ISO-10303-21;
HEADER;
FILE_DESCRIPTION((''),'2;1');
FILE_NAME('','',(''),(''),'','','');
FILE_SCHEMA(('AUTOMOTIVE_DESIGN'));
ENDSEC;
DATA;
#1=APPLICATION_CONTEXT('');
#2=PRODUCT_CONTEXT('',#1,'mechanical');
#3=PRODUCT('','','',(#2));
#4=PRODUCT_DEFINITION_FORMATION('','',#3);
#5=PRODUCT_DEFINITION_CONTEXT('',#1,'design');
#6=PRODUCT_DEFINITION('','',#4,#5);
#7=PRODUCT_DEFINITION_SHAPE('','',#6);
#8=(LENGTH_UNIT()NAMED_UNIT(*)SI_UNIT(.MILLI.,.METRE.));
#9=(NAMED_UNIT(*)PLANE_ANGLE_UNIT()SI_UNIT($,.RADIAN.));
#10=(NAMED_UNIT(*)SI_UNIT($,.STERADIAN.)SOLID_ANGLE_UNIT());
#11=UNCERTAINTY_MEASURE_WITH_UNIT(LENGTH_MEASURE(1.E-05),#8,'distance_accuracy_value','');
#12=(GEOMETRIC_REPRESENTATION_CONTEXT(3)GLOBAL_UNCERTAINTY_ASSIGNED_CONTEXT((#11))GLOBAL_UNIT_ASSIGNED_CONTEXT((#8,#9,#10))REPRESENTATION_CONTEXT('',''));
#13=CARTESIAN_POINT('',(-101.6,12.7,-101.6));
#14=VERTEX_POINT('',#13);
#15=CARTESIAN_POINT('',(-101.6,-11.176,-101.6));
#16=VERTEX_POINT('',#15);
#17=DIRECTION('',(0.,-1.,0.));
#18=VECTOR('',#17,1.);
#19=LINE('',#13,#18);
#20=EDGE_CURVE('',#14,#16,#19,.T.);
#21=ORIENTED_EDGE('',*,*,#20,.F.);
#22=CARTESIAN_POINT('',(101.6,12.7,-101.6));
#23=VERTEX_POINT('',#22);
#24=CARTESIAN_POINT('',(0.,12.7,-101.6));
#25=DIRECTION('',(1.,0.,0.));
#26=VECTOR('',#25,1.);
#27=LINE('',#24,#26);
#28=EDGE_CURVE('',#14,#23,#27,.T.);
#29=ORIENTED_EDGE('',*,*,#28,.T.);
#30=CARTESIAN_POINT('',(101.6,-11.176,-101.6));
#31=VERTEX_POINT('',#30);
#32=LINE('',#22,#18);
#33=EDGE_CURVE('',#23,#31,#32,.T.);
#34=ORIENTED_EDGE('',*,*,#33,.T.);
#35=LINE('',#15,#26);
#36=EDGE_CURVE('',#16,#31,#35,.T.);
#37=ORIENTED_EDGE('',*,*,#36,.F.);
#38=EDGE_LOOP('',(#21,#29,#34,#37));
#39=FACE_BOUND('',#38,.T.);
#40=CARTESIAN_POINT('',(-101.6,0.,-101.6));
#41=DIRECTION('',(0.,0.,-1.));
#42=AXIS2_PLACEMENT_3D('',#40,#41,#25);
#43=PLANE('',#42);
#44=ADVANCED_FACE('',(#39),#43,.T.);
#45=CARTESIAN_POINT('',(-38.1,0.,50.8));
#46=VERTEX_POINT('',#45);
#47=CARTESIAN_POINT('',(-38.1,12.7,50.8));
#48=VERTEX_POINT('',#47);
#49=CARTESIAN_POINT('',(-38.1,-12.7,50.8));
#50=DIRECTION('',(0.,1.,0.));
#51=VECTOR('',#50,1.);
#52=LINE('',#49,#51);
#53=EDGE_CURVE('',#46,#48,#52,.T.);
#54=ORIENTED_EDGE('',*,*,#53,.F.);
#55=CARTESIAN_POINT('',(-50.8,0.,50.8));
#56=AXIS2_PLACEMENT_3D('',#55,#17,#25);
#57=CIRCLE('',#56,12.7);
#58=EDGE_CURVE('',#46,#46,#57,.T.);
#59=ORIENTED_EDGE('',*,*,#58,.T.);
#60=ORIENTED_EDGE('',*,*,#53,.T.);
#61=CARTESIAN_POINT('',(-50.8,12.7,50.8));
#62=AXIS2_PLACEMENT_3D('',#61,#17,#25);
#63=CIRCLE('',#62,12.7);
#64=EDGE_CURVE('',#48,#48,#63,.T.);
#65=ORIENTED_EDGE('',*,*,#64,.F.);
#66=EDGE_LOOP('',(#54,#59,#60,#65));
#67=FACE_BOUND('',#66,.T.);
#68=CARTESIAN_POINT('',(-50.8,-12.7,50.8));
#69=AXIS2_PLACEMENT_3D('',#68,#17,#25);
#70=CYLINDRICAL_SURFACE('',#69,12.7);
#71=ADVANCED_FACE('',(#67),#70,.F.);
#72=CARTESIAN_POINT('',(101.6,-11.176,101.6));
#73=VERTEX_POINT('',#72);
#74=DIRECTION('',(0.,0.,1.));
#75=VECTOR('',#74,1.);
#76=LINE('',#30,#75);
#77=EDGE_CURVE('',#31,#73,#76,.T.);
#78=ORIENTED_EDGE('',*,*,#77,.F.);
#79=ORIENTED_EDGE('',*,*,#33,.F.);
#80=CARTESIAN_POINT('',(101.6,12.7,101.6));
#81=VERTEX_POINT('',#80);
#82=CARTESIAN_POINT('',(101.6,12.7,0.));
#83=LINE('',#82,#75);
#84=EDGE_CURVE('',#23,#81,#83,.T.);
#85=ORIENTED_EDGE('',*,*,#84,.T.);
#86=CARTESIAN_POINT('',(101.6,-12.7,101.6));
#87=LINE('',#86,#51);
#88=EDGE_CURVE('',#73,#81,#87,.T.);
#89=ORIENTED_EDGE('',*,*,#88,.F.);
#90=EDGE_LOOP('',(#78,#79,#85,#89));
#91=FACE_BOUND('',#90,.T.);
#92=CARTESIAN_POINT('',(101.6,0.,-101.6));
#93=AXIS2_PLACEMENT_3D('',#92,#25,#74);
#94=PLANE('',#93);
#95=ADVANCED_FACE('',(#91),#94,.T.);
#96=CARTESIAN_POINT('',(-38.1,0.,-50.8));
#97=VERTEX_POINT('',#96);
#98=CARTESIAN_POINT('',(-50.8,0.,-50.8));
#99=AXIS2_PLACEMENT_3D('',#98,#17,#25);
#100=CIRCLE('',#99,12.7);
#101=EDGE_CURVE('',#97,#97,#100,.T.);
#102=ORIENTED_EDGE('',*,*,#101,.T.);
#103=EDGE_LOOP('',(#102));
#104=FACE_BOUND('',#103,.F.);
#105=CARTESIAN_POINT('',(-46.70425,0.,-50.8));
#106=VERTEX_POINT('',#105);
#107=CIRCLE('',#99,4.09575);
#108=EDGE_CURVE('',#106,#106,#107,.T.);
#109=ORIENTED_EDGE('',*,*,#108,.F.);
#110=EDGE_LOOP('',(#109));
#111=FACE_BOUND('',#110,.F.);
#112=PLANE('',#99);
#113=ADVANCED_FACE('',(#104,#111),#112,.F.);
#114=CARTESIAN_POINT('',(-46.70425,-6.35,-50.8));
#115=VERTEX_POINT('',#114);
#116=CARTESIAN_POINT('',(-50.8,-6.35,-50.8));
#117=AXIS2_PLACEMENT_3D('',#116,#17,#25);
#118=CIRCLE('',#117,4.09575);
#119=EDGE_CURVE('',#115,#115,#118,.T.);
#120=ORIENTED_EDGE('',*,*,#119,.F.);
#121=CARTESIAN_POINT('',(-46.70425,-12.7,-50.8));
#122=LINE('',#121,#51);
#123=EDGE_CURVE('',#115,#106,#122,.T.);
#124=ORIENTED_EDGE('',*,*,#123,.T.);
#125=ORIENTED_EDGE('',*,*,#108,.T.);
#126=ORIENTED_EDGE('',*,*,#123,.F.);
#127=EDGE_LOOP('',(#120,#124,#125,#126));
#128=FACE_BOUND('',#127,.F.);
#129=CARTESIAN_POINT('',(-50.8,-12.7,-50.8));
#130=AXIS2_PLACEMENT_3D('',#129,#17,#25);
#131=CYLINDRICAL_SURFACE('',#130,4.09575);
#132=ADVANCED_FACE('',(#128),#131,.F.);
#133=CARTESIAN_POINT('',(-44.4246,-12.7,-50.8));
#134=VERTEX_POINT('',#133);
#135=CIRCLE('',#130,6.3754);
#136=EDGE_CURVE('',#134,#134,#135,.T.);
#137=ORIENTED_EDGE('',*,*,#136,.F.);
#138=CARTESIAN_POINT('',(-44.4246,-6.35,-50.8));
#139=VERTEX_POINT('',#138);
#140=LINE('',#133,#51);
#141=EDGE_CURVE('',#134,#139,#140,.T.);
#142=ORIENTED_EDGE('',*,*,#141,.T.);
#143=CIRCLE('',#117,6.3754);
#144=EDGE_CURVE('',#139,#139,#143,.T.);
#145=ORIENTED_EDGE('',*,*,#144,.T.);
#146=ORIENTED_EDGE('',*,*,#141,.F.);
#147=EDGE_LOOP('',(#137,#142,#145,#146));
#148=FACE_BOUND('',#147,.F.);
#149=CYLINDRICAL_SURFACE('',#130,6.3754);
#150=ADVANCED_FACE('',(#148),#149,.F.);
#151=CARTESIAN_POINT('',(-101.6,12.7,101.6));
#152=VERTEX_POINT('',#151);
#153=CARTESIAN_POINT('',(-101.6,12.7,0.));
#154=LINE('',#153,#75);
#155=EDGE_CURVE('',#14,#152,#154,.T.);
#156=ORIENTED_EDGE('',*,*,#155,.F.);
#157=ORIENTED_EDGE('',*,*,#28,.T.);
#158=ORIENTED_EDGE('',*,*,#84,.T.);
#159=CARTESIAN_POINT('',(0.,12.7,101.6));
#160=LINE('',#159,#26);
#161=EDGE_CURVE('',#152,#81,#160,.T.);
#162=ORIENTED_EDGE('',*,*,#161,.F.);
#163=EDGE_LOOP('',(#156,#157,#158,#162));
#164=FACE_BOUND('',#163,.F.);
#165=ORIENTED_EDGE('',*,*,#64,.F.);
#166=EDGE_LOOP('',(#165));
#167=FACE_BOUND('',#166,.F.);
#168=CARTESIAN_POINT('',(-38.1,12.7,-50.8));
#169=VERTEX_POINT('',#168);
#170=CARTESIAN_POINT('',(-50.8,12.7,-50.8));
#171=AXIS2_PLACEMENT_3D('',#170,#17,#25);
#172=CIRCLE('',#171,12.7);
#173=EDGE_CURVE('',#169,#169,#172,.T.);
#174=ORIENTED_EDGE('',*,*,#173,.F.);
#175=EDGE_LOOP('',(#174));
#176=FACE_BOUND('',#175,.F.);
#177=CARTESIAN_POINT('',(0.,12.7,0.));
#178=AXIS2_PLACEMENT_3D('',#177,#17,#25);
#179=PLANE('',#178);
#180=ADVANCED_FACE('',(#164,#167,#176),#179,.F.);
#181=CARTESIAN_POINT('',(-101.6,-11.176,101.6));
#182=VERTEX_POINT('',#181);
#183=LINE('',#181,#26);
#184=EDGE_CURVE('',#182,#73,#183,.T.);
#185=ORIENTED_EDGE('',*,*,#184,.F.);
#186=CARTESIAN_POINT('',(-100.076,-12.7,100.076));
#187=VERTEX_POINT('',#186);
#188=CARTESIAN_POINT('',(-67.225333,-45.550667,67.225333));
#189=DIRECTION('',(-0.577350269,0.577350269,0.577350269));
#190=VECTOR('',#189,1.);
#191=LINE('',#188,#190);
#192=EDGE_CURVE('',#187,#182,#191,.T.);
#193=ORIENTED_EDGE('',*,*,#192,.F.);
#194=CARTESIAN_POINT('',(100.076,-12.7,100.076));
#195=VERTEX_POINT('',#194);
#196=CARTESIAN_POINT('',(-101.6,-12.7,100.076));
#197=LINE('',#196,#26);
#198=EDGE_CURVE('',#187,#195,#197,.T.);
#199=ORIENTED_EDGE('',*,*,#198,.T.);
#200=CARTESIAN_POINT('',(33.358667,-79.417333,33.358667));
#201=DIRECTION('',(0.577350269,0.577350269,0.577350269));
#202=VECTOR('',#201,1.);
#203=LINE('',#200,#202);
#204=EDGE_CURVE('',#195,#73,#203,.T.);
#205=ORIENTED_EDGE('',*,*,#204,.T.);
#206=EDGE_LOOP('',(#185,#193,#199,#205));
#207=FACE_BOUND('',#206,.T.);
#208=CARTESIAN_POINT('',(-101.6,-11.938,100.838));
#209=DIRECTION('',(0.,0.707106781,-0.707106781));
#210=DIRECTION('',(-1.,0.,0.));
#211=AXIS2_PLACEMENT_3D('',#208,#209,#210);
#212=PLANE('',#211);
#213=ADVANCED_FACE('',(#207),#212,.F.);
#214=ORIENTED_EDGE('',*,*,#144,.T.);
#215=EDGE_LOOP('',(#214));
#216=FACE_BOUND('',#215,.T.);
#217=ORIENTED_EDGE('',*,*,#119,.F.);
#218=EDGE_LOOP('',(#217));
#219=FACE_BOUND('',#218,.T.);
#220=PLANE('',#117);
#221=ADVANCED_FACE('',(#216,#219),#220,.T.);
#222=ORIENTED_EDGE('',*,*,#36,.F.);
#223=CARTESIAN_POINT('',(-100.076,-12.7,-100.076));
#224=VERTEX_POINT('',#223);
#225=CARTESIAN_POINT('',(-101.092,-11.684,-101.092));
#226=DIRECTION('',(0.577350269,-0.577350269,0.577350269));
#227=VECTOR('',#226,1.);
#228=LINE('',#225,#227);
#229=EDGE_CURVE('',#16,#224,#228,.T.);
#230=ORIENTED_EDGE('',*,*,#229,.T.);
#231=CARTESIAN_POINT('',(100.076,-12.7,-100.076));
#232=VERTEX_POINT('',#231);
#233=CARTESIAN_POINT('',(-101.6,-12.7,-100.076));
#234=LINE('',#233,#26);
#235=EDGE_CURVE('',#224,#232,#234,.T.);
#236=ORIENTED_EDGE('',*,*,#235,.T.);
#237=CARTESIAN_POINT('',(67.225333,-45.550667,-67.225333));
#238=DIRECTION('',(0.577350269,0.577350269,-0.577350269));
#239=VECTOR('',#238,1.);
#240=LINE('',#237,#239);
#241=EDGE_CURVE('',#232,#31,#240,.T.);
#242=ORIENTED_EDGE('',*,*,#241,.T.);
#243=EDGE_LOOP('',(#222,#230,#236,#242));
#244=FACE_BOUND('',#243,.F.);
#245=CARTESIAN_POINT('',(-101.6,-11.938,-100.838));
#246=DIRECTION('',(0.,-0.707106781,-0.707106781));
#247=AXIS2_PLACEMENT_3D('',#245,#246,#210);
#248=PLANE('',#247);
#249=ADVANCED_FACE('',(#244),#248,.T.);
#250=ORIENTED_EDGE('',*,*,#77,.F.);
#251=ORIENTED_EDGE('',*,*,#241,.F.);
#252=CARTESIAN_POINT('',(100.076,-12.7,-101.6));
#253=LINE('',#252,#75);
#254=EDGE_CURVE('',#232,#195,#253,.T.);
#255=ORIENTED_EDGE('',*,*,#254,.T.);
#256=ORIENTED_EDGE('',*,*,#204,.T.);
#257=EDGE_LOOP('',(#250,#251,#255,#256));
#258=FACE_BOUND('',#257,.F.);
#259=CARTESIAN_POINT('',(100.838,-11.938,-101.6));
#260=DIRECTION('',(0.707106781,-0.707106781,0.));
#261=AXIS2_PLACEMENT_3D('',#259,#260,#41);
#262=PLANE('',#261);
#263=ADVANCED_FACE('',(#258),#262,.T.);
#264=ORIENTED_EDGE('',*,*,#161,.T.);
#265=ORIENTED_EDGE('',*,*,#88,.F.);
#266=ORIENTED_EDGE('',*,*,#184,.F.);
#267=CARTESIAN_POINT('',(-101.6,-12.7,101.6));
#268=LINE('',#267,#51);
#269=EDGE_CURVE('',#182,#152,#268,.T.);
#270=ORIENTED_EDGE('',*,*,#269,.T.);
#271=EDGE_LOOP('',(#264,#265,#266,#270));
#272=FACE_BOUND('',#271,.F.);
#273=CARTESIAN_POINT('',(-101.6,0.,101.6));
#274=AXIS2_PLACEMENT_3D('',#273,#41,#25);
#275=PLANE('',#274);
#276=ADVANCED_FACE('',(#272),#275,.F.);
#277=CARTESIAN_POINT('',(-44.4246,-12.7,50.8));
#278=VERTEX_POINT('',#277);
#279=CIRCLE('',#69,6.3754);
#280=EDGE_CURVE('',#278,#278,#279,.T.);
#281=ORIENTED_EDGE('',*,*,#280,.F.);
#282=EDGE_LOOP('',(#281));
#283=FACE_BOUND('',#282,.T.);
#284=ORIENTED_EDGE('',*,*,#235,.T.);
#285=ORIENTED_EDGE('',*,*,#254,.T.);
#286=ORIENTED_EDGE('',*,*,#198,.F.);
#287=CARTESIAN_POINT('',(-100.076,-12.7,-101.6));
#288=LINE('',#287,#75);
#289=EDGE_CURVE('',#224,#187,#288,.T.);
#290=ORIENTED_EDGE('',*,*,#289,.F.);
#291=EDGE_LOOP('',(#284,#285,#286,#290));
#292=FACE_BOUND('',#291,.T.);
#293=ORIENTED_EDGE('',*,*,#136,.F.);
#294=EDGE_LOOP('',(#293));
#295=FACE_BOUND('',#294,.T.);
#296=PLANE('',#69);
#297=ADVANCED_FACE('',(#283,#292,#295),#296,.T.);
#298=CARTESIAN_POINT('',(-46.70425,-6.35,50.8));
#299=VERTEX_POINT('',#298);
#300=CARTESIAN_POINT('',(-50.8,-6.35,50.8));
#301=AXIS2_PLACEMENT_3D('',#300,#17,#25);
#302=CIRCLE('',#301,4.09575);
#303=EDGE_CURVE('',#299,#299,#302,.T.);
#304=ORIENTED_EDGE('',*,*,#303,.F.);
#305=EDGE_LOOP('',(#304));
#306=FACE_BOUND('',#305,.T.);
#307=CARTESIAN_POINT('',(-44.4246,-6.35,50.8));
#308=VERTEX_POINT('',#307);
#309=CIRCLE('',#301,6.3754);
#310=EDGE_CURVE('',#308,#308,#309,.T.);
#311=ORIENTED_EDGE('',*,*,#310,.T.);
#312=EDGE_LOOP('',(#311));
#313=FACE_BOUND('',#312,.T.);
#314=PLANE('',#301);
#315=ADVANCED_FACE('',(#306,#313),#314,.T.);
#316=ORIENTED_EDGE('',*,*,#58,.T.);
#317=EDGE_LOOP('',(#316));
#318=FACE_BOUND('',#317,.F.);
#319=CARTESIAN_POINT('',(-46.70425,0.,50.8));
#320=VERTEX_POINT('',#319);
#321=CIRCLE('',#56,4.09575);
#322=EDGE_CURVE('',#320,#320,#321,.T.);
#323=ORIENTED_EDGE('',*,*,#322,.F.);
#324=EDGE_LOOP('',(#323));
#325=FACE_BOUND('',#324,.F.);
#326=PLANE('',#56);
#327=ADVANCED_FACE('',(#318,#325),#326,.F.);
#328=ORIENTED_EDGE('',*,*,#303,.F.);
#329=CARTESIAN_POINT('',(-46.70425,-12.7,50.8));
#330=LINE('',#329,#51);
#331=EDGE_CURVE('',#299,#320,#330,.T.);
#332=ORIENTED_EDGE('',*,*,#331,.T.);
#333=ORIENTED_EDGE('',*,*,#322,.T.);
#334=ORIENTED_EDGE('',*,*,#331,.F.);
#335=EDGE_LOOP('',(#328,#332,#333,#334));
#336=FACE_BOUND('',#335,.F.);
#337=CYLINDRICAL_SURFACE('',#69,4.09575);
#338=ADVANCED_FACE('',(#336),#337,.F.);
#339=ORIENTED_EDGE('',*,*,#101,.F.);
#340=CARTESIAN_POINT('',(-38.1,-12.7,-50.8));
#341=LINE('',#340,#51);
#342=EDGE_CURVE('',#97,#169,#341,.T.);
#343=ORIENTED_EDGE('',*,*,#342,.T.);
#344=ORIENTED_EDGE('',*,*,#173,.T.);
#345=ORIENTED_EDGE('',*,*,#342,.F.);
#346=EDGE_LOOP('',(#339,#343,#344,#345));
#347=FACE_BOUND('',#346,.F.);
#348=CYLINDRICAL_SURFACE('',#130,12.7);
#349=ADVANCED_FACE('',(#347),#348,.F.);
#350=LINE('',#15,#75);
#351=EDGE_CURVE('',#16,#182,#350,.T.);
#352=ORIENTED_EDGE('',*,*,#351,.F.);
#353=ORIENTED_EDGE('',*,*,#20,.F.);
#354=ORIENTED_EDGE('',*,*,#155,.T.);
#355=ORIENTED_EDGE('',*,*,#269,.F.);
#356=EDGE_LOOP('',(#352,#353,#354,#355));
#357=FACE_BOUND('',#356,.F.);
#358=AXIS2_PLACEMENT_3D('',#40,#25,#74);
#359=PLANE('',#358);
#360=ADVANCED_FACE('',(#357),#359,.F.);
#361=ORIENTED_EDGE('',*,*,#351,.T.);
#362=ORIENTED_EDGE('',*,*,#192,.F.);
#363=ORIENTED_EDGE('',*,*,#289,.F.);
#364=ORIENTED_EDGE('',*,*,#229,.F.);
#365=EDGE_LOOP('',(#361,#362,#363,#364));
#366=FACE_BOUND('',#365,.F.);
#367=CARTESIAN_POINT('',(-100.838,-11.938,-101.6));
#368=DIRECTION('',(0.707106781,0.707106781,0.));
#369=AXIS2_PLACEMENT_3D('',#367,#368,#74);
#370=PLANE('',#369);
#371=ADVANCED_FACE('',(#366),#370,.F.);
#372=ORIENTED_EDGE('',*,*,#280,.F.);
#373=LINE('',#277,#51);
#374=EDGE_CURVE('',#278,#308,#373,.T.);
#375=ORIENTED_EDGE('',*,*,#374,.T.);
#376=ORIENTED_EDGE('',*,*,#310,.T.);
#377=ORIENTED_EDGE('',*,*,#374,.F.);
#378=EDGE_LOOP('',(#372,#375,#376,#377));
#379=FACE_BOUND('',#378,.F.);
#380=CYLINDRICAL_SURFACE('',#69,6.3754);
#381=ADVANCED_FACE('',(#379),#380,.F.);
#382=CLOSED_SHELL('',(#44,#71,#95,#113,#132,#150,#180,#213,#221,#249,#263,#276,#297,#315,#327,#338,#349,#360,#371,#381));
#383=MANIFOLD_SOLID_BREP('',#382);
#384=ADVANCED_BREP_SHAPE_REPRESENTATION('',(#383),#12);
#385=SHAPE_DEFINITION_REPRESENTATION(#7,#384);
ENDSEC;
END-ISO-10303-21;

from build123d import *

# Parameters (mm, degrees)
F0_W     = 203.2
F0_H     = 203.2
F1_DEPTH = 12.7
F2_SIZE  = 1.524
F3_R     = 12.7
F4_DEPTH = 25.401
F5_R     = 12.7
F5_R_2   = 4.09575
F6_DEPTH = 12.7
F7_R     = 6.3754
F8_DEPTH = 6.35


# Not quite as in the source:
# - a pattern or mirror of a feature is missing from the dataset's text; its kind, count and spacing are read off the source's solid


with BuildPart() as f1:
    # F0 (on Front) → F1 (new body, symmetric)
    with BuildSketch(Plane.XZ):
        Rectangle(F0_W, F0_H)
    extrude(amount=F1_DEPTH, both=True)

    # F2
    f2_edges = [f1.edges().sort_by_distance(p)[0] for p in [
        (101.6, -12.7, 0),
        (0, -12.7, 101.6),
        (-101.6, -12.7, 0),
        (0, -12.7, -101.6),
    ]]
    chamfer(f2_edges, length=F2_SIZE)

    # F3 (on face) → F4 (cut, through all)
    with BuildSketch(Plane.XZ.offset(12.7)):
        with Locations((-50.8, -50.8)):
            Circle(F3_R)
    f4 = extrude(amount=-F4_DEPTH, mode=Mode.SUBTRACT)

    # F4_copies: F4 across plane
    add(f4.mirror(Plane.XY), mode=Mode.SUBTRACT)

    # F5 (on face) → F6 (join)
    with BuildSketch(Plane.XZ.offset(12.7)):
        with Locations((-50.8, 50.8)):
            Circle(F5_R)
        with Locations((-50.8, 50.8)):
            Circle(F5_R_2, mode=Mode.SUBTRACT)
        with Locations((-50.8, -50.8)):
            Circle(F5_R)
        with Locations((-50.8, -50.8)):
            Circle(F5_R_2, mode=Mode.SUBTRACT)
    extrude(amount=-F6_DEPTH)

    # F7 (on face) → F8 (cut)
    with BuildSketch(Plane.XZ.offset(12.7)):
        with Locations((-50.8, 50.8)):
            Circle(F7_R)
        with Locations((-50.8, -50.8)):
            Circle(F7_R)
    extrude(amount=-F8_DEPTH, mode=Mode.SUBTRACT)


solid = f1.part
